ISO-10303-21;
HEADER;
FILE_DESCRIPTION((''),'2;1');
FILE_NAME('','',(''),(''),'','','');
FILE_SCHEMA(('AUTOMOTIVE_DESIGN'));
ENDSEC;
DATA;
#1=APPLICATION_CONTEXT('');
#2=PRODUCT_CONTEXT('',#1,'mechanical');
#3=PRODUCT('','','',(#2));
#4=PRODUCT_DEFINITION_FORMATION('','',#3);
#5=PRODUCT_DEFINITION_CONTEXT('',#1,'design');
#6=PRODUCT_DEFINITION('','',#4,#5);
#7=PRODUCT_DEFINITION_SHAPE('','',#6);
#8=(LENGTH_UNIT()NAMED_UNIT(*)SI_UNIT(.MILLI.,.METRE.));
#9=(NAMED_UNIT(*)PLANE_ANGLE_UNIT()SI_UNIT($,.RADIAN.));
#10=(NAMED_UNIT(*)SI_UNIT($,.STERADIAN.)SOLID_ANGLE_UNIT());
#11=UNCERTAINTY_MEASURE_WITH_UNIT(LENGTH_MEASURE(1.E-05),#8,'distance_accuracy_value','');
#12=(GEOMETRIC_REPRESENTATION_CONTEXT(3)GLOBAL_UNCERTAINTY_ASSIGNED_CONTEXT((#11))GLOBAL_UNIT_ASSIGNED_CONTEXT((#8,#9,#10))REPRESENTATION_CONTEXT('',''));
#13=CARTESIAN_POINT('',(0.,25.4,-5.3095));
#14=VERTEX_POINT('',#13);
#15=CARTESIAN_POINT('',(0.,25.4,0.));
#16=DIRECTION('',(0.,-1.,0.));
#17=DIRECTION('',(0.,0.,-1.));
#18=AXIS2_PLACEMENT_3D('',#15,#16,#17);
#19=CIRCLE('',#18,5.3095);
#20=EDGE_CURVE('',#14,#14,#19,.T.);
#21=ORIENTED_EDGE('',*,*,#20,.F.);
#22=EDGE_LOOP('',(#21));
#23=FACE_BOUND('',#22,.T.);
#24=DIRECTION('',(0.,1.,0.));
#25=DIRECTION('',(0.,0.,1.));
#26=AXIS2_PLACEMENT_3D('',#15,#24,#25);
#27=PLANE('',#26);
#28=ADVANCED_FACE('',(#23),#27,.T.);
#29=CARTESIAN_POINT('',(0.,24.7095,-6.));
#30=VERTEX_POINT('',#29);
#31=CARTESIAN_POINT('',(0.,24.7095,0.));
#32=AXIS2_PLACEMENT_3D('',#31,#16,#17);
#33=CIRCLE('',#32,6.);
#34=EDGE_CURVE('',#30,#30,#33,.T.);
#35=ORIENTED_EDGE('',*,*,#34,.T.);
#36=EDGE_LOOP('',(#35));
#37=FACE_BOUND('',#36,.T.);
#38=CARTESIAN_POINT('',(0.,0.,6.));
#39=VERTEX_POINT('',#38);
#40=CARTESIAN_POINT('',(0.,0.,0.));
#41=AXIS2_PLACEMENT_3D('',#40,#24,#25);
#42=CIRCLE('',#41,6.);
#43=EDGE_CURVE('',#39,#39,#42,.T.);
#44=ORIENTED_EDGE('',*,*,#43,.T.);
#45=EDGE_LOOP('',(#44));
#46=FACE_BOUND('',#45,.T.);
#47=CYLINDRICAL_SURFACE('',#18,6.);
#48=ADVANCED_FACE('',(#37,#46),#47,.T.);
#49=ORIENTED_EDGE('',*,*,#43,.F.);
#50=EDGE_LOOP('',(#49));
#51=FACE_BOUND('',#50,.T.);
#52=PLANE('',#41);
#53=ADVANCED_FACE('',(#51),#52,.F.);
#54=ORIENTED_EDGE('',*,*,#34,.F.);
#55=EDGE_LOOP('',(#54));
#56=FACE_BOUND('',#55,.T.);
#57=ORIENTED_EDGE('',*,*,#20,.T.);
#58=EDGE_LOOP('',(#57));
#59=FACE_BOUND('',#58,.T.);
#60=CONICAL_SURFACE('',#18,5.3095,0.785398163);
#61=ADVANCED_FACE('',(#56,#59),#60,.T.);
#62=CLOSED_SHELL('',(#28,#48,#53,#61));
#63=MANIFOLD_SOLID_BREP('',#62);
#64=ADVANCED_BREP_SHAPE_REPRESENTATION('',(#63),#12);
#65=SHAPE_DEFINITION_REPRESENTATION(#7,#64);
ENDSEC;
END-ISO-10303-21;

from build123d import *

# Parameters (mm, degrees)
SKETCH1_R           = 6
BOSS_EXTRUDE1_DEPTH = 25.4


# Read off the part's stored shape, not the designer's step: M12x1.25 Machine Threads Stud1
with BuildPart() as part:
    # Sketch1 → Boss-Extrude1 (new body)
    with BuildSketch(Plane(origin=(0, 0, 0), x_dir=(1, 0, 0), z_dir=(0, 1, 0))):
        with Locations(Location((0, 0, 0), (0, 0, 270))):
            Circle(SKETCH1_R)
    extrude(amount=BOSS_EXTRUDE1_DEPTH)

    # M12x1.25 Machine Threads Stud1 outline → M12x1.25 Machine Threads Stud1 (revolve, cut)
    with BuildSketch(Plane.XY):
        Polygon((6, 25.4), (5.3095, 25.4), (6, 24.7095), align=None)
    revolve(axis=Axis((0, 0, 0), (0, 1, 0)), mode=Mode.SUBTRACT)


solid = part.part
